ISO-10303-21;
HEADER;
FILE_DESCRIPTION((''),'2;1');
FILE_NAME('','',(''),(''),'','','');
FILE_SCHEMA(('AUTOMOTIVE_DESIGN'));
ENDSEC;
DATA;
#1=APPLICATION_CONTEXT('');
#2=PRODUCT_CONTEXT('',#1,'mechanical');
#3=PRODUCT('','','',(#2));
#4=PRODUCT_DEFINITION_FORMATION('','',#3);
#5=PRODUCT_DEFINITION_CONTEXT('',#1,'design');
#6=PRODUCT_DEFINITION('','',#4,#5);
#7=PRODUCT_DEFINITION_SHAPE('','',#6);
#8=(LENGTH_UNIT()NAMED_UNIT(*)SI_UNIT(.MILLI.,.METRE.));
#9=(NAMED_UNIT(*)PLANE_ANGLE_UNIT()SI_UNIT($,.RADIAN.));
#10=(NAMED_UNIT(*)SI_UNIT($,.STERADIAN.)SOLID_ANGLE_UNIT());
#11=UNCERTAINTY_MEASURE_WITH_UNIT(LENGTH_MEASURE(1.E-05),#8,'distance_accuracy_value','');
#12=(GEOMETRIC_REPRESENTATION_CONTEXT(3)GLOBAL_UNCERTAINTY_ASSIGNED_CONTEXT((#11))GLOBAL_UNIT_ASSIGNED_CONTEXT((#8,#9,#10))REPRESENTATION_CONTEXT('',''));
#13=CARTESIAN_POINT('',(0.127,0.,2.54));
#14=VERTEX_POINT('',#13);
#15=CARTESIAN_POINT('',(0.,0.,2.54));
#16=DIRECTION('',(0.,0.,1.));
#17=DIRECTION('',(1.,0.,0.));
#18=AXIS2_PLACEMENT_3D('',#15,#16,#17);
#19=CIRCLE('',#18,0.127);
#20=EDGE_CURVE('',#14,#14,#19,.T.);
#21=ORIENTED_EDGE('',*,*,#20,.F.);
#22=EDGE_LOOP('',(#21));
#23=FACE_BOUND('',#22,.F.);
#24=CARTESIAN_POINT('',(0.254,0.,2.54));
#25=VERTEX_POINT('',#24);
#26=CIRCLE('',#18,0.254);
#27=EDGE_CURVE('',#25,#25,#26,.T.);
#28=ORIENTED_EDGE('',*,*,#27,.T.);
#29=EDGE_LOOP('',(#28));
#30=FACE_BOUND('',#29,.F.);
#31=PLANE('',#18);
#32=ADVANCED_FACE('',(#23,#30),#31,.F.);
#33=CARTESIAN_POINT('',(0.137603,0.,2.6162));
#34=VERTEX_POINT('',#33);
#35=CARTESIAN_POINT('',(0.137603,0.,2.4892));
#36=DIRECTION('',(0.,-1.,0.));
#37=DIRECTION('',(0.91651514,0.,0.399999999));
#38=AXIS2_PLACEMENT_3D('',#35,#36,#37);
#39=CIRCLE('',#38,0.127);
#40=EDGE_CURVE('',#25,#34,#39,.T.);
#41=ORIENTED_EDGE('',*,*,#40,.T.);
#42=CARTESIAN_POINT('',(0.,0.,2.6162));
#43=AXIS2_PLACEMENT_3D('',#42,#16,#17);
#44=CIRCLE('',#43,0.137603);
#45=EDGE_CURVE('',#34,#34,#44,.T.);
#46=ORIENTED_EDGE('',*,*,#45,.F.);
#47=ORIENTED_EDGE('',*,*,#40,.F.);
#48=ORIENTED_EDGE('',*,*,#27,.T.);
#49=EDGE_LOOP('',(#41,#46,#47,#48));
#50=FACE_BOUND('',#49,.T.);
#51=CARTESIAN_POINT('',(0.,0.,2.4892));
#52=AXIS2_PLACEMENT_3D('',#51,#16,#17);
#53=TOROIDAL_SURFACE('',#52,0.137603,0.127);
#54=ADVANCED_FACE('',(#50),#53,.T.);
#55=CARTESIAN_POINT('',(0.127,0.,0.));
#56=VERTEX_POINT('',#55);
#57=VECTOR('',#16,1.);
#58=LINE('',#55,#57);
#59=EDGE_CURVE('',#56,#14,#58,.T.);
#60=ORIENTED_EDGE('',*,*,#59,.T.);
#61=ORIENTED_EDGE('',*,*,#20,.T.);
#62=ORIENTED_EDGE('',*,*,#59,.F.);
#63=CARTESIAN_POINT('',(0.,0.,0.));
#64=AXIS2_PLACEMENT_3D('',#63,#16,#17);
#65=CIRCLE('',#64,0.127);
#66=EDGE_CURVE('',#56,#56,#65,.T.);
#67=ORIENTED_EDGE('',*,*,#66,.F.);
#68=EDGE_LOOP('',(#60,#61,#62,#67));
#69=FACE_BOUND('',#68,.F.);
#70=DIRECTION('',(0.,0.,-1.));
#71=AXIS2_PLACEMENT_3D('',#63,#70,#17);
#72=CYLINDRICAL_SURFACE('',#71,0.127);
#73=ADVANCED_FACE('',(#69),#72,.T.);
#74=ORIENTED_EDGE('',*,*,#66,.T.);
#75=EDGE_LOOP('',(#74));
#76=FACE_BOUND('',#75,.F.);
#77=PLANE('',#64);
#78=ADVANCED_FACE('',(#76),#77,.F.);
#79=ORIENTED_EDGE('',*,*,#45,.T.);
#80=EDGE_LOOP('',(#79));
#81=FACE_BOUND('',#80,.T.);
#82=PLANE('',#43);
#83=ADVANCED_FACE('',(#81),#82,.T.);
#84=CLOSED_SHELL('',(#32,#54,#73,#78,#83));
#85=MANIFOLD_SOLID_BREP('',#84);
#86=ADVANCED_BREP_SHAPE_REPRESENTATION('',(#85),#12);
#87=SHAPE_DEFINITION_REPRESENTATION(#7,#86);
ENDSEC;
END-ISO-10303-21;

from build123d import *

# Parameters (mm, degrees)
F0_R     = 0.127
F1_DEPTH = 2.54
F2_R     = 0.254
F2_R_2   = 0.127
F3_DEPTH = 0.0762
F4_DEPTH = 0.0762


# Not quite as in the source:
# - a fillet or chamfer that OpenCascade refuses, or shapes differently, is made with other operations: its cross-section is extruded or revolved along the edge and cut away or added


with BuildPart() as f1:
    # F0 (on Top) → F1 (new body)
    with BuildSketch(Plane.XY):
        Circle(F0_R)
    extrude(amount=F1_DEPTH)

    # F2 (on face) → F3 (join)
    with BuildSketch(Plane.XY.offset(2.54)):
        Circle(F2_R)
        Circle(F2_R_2, mode=Mode.SUBTRACT)
    extrude(amount=F3_DEPTH)

    # F4 (add): a face of the model
    f4_faces = [f1.faces().sort_by_distance(p)[0] for p in [
        (0, 0, 2.54),
    ]]
    extrude(f4_faces, amount=F4_DEPTH)

    # F5: fillet of radius 0.127 on 1 edges, made by hand

    # F5_s1 → F5_t2 (revolve, cut)
    with BuildSketch(Plane.XZ):
        with BuildLine():
            ThreePointArc((0.254, 2.54), (0.2071633422, 2.5954558234), (0.1376025773, 2.6162))
            Line((0.1376025773, 2.6162), (0.254, 2.6162))
            Line((0.254, 2.6162), (0.254, 2.54))
        make_face()
    revolve(axis=Axis((0, 0, 2.6162), (0, 0, 1)), mode=Mode.SUBTRACT)


solid = f1.part
